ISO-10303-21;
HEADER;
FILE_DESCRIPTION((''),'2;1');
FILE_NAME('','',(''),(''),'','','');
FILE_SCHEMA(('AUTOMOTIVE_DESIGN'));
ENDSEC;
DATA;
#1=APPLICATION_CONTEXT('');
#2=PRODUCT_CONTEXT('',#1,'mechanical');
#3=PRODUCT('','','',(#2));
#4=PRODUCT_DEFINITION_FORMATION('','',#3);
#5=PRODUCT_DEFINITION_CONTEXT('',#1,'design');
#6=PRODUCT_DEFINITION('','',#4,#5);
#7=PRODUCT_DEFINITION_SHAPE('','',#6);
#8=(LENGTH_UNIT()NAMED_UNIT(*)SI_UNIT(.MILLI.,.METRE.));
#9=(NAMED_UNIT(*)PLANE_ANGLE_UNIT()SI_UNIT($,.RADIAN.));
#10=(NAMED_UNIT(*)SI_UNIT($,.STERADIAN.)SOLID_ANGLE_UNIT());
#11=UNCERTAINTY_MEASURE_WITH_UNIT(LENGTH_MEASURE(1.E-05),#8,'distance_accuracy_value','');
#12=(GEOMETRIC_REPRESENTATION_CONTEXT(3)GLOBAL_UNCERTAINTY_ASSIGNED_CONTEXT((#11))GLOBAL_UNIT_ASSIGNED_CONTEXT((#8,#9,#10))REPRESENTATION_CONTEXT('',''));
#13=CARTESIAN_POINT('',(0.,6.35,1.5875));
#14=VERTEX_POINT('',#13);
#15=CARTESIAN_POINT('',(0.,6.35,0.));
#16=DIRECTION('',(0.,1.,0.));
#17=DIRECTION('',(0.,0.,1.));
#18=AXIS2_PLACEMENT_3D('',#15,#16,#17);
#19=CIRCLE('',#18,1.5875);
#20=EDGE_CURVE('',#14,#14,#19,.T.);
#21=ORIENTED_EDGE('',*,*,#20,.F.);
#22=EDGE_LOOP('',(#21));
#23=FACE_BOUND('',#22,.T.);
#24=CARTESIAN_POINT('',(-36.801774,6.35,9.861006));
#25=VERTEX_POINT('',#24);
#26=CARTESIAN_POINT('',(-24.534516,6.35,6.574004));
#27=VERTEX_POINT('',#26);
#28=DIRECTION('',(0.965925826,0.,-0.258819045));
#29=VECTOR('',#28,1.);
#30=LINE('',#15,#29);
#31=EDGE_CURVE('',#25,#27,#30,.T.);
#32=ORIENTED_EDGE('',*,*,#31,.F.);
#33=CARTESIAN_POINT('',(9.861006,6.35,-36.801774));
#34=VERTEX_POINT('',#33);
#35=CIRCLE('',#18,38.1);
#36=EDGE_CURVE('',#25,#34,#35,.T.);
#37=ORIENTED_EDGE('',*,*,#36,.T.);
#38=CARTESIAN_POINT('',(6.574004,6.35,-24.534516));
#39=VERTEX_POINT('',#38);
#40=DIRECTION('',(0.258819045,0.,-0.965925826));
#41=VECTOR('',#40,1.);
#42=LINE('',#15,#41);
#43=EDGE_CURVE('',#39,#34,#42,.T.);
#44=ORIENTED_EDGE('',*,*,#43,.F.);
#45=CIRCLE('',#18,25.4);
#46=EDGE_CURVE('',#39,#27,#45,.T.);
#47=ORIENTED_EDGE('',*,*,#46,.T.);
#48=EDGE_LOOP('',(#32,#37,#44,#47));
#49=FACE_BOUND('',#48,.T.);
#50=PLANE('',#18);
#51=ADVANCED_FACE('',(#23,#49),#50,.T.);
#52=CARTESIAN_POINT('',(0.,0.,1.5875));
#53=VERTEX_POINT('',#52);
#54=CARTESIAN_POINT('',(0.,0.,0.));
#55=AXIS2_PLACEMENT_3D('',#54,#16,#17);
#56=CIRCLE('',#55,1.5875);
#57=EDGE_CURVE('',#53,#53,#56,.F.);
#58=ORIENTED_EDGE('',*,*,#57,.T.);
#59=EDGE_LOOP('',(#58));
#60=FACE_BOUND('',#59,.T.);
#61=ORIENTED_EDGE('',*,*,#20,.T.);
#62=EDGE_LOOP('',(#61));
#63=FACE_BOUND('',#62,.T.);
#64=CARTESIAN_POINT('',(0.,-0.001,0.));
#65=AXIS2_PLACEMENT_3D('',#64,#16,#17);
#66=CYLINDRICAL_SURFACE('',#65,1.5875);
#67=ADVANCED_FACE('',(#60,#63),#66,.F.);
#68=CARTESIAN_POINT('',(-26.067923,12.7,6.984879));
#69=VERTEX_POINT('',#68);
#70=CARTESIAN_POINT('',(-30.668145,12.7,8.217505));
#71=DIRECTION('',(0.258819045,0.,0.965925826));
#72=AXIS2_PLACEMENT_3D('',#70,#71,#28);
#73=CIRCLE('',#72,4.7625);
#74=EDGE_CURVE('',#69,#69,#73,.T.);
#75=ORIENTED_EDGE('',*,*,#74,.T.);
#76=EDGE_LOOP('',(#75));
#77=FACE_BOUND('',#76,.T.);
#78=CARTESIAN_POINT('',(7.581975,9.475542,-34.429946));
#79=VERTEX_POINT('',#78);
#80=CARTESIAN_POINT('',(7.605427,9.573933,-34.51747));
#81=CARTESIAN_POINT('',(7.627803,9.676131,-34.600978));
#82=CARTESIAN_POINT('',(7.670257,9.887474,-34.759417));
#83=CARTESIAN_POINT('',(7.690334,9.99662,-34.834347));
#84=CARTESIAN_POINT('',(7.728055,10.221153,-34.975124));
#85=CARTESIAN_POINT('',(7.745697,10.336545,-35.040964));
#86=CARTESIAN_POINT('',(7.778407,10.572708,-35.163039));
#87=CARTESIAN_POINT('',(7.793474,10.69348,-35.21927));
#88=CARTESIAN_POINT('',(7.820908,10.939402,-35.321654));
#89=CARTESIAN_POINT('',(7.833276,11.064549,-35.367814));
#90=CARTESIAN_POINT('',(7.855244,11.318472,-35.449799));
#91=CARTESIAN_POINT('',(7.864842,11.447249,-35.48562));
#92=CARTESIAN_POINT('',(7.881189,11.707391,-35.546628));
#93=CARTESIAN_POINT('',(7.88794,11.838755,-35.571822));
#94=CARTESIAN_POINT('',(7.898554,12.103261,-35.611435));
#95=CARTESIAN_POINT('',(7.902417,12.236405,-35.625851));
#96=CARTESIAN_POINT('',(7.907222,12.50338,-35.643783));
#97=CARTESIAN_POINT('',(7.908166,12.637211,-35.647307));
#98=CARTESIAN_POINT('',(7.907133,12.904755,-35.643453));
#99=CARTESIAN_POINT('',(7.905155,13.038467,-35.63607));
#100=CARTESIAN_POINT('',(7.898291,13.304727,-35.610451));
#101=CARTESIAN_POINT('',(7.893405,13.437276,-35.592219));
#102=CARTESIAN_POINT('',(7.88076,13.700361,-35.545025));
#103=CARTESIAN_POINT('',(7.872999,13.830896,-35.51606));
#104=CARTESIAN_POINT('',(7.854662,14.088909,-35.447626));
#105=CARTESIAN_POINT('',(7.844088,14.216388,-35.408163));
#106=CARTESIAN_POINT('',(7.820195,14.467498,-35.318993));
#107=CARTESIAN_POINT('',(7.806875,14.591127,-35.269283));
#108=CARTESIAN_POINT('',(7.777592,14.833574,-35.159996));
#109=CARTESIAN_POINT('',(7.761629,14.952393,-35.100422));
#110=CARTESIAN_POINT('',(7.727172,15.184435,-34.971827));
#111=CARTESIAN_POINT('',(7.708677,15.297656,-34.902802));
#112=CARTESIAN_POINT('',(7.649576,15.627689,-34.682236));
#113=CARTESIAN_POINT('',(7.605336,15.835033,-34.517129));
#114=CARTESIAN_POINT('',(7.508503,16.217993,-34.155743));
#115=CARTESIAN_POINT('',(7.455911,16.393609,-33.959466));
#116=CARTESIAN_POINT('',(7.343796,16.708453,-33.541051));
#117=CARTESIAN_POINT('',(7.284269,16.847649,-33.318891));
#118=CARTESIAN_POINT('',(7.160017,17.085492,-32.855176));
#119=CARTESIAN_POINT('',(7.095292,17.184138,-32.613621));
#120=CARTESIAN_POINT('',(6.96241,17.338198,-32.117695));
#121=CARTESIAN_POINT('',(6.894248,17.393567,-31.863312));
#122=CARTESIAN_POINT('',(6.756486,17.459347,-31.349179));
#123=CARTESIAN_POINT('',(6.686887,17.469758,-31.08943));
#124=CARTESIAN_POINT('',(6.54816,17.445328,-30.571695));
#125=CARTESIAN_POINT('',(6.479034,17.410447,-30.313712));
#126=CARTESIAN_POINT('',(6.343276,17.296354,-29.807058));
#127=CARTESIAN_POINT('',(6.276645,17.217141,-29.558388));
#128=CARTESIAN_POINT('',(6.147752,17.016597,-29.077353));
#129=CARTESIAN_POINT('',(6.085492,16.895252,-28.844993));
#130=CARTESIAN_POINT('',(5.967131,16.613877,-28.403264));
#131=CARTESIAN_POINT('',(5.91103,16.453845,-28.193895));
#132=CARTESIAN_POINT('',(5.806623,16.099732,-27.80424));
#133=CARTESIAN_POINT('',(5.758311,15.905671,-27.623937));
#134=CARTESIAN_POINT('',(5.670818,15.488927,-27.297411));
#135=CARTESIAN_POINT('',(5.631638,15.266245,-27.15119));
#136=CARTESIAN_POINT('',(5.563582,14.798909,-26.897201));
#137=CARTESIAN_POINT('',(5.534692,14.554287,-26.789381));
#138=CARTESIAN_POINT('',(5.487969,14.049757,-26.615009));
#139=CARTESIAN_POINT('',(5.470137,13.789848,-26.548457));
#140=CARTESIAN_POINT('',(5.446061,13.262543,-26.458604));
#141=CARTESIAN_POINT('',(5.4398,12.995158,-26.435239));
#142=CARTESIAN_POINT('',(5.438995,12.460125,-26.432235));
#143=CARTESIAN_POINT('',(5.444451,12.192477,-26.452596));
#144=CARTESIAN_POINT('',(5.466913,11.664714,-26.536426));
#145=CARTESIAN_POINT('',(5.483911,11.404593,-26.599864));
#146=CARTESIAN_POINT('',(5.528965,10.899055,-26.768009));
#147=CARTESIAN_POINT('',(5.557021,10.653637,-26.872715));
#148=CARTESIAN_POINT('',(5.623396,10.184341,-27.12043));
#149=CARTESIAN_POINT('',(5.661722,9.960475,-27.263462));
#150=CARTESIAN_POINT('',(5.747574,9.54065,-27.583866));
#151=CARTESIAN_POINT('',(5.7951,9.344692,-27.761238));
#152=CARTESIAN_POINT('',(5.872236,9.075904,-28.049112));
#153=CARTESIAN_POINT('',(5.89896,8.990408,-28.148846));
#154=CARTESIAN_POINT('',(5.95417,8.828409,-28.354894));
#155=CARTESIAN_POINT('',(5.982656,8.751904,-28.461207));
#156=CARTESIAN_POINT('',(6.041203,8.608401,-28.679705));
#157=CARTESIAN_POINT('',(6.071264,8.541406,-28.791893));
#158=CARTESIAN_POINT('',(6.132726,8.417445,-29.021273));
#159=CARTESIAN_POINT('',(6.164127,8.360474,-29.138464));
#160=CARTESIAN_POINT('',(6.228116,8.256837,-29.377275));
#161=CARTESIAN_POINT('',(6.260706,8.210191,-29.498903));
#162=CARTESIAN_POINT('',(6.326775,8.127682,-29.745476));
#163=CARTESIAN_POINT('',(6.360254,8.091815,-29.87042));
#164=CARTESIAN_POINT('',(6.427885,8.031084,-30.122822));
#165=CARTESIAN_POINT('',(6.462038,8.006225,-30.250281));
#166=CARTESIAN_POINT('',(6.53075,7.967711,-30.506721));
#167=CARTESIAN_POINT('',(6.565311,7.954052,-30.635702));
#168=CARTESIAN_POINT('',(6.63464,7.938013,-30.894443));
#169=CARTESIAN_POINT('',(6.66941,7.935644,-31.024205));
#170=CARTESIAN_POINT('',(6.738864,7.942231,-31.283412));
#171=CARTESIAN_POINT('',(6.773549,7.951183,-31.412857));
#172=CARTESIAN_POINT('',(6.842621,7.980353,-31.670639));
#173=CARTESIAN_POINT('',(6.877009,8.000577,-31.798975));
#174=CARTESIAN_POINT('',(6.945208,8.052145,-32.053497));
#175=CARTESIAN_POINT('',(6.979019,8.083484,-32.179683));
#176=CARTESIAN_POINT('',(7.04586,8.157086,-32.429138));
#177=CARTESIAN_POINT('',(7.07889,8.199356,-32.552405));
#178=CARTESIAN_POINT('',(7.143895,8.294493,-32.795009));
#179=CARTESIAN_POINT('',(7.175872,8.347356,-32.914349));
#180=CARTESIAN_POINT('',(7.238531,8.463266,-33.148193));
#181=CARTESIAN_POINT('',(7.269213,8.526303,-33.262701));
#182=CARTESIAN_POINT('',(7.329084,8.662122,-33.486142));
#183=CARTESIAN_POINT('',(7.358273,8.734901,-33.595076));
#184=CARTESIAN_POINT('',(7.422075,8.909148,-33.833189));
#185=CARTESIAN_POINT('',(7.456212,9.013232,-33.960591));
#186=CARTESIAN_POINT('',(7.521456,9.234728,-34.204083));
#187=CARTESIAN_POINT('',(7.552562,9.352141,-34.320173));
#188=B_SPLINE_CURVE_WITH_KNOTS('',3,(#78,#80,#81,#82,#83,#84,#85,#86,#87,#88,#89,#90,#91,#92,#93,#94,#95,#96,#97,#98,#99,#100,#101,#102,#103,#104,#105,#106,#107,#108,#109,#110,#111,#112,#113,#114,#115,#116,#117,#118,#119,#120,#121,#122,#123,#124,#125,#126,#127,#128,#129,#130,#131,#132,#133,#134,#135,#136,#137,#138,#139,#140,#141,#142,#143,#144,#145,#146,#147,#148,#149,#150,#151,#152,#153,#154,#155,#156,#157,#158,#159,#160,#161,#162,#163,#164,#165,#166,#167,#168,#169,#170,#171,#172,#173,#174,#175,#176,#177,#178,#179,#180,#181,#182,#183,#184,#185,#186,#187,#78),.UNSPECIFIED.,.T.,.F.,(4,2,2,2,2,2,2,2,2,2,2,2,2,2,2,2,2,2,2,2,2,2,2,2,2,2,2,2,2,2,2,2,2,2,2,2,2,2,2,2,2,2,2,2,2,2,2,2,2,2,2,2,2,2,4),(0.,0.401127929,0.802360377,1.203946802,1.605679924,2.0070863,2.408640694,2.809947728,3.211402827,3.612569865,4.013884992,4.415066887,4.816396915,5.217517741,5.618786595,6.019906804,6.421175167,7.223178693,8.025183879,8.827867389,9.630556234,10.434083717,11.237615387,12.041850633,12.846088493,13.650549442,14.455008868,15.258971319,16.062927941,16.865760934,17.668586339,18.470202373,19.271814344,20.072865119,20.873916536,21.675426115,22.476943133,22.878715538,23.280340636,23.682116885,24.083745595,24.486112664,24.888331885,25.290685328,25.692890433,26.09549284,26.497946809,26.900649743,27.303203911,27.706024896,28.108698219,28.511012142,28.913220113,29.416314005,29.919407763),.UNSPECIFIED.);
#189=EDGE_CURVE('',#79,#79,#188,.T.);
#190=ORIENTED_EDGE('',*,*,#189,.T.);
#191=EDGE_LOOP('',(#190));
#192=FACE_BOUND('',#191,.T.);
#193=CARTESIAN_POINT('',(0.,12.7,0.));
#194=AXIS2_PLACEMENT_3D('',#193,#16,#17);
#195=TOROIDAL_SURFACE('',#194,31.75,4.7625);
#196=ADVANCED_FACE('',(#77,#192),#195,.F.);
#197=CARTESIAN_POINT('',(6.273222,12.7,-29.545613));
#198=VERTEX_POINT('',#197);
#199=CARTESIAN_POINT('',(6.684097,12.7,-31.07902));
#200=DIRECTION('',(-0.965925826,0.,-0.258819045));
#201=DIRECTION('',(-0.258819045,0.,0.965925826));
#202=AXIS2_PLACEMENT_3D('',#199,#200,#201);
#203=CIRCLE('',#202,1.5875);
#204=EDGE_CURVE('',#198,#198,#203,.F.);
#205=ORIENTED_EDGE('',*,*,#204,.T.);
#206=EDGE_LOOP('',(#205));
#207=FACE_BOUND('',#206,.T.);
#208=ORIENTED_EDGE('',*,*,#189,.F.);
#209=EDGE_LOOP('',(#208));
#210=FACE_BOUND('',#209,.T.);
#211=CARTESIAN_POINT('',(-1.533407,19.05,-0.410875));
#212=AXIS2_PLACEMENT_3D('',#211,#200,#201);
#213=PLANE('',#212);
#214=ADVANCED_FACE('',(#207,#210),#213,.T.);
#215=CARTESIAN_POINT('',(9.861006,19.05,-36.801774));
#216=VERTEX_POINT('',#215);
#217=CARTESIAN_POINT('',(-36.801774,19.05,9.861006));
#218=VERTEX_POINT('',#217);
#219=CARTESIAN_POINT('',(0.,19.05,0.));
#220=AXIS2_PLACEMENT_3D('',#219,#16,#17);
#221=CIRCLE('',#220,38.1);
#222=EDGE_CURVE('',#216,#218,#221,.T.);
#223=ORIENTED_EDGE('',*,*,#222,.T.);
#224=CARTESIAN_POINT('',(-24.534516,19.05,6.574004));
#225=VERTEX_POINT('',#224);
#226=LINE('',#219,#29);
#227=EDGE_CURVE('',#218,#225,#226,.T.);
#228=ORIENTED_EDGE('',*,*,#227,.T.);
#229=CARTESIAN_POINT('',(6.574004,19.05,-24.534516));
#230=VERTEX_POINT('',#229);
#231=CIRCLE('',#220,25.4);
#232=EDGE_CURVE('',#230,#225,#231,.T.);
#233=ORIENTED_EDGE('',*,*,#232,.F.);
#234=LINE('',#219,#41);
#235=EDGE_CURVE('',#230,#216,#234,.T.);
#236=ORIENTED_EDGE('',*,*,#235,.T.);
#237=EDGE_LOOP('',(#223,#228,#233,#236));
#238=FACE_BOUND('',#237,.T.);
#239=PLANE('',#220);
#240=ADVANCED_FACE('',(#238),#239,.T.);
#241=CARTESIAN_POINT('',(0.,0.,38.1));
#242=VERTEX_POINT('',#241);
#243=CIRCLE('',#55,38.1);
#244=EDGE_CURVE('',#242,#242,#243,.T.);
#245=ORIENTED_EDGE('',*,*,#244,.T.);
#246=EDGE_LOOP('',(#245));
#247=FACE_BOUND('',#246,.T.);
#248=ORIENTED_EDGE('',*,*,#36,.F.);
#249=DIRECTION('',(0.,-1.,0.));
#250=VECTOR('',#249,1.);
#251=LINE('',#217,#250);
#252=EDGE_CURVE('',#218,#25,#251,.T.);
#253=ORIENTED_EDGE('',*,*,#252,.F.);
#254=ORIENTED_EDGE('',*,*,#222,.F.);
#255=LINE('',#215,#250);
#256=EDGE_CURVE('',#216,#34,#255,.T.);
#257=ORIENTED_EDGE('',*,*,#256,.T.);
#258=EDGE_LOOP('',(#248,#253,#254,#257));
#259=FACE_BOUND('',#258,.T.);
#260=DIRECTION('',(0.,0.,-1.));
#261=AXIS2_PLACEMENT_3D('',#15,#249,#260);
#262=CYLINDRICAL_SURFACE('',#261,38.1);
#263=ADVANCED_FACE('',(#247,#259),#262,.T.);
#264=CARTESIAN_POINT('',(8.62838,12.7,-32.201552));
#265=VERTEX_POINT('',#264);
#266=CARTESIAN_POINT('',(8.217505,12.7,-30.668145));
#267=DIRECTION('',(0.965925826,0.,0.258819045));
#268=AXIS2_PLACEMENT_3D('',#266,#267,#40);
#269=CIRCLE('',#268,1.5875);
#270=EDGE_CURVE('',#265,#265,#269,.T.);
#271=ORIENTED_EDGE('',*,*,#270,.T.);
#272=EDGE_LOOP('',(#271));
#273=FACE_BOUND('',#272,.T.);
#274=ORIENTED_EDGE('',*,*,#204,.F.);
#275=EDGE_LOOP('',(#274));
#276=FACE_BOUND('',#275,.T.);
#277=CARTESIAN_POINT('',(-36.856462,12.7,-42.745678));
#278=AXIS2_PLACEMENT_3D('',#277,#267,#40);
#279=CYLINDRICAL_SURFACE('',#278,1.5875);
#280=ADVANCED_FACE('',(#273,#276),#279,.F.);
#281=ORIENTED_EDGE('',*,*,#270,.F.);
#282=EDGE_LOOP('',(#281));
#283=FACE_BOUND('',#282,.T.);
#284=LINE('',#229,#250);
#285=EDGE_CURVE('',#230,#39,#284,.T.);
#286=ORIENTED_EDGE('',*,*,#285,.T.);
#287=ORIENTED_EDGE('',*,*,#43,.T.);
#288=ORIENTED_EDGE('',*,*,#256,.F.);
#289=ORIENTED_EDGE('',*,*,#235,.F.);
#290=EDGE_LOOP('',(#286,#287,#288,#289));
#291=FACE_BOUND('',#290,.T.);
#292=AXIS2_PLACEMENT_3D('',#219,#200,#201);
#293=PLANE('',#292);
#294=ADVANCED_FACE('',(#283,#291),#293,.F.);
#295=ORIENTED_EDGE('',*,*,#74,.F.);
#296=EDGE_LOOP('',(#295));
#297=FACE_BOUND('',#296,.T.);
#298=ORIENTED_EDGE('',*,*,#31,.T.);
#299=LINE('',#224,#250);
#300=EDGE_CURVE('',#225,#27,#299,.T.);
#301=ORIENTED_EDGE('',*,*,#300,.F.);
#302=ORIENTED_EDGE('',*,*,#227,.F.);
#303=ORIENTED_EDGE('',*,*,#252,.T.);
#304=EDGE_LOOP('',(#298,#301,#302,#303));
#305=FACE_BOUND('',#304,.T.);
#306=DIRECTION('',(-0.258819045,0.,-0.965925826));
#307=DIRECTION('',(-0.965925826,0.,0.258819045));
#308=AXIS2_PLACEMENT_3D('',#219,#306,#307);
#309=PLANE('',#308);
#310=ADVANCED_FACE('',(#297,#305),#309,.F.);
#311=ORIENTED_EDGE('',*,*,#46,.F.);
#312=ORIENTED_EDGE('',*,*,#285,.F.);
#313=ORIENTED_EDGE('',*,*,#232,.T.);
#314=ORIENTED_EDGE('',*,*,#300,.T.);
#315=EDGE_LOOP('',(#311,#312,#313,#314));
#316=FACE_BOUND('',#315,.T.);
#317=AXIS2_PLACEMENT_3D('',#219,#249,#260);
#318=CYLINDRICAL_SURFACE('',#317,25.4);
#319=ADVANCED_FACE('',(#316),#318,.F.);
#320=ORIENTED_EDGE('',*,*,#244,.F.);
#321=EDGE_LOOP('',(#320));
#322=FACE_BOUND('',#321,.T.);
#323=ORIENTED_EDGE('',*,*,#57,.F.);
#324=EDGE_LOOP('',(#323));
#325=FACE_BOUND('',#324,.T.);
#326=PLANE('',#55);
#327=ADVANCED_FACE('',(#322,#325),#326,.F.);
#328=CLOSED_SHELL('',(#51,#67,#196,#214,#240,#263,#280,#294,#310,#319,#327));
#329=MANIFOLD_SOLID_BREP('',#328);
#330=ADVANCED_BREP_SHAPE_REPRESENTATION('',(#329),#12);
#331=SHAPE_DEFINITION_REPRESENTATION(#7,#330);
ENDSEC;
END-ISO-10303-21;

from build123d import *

# Parameters (mm, degrees)
SKETCH1_R                = 38.1
BOSS_EXTRUDE1_DEPTH      = 6.35
BOSS_EXTRUDE2_DEPTH      = 12.7
CUT_REVOLVE1_OUTLINE_R   = 4.7625
CUT_REVOLVE1_START       = -1.5875
CUT_REVOLVE1_2_OUTLINE_W = 11
CUT_REVOLVE1_2_OUTLINE_H = 11
CUT_REVOLVE1_2_DEPTH     = 1.5875
CUT_EXTRUDE2_REACH       = 59.15
SKETCH5_R                = 1.5875
CUT_EXTRUDE3_REACH       = 57.358
SKETCH6_R                = 1.5875


with BuildPart() as part:
    # Sketch1 → Boss-Extrude1 (new body)
    with BuildSketch(Plane(origin=(0, 0, 0), x_dir=(1, 0, 0), z_dir=(0, 1, 0))):
        with Locations(Location((0, 0, 0), (0, 0, 270))):
            Circle(SKETCH1_R)
    extrude(amount=BOSS_EXTRUDE1_DEPTH)

    # Sketch2 → Boss-Extrude2 (add)
    with BuildSketch(Plane(origin=(0, 6.35, 0), x_dir=(1, 0, 0), z_dir=(0, 1, 0))):
        with BuildLine():
            ThreePointArc((9.861005618, 36.801773982), (-26.940768363, 26.940768363), (-36.801773982, -9.861005618))
            Line((-36.801773982, -9.861005618), (-24.534515988, -6.574003746))
            ThreePointArc((-24.534515988, -6.574003746), (-17.960512242, 17.960512242), (6.574003746, 24.534515988))
            Line((6.574003746, 24.534515988), (9.861005618, 36.801773982))
        make_face()
    extrude(amount=BOSS_EXTRUDE2_DEPTH)

    # Cut-Revolve1: read off the stored shape, not the designer's step
    # Cut-Revolve1 outline → Cut-Revolve1 (revolve, cut)
    with BuildSketch(Plane.XY):
        with Locations((31.75, 12.7)):
            Circle(CUT_REVOLVE1_OUTLINE_R)
    revolve(axis=Axis((0, 0, 0), (0, 1, 0)), mode=Mode.SUBTRACT)

    # Cut-Revolve1 2 outline → Cut-Revolve1 2 (add)
    with BuildSketch(Plane(origin=(0, 0, 0), x_dir=(0, 1, 0), z_dir=(0.9659258262890682, 0, 0.2588190451025211)).offset(CUT_REVOLVE1_START)):
        with Locations((12.5, -31.5)):
            Rectangle(CUT_REVOLVE1_2_OUTLINE_W, CUT_REVOLVE1_2_OUTLINE_H)
    extrude(amount=CUT_REVOLVE1_2_DEPTH)

    # Sketch5 → Cut-Extrude2 (cut, up to next)
    with BuildSketch(Plane(origin=(0, 0, 0), x_dir=(0.25881904510252135, 0, -0.9659258262890682), z_dir=(0.9659258262890681, 0, 0.2588190451025213)), mode=Mode.PRIVATE) as cut_extrude2_sk1:
        with Locations((31.75, 12.7)):
            Circle(SKETCH5_R)
    cut_extrude2_tool1 = extrude(cut_extrude2_sk1.sketch, amount=-CUT_EXTRUDE2_REACH, mode=Mode.PRIVATE) & part.part
    add(cut_extrude2_tool1.solids().sort_by_distance((8.217505, 12.7, -30.668145))[0], mode=Mode.SUBTRACT)

    # Sketch6 → Cut-Extrude3 (cut, up to next)
    with BuildSketch(Plane(origin=(0, 6.35, 0), x_dir=(1, 0, 0), z_dir=(0, 1, 0)), mode=Mode.PRIVATE) as cut_extrude3_sk1:
        with Locations(Location((0, 0, 0), (0, 0, 270))):
            Circle(SKETCH6_R)
    cut_extrude3_tool1 = extrude(cut_extrude3_sk1.sketch, amount=-CUT_EXTRUDE3_REACH, mode=Mode.PRIVATE) & part.part
    add(cut_extrude3_tool1.solids().sort_by_distance((0, 6.35, 0))[0], mode=Mode.SUBTRACT)


solid = part.part
